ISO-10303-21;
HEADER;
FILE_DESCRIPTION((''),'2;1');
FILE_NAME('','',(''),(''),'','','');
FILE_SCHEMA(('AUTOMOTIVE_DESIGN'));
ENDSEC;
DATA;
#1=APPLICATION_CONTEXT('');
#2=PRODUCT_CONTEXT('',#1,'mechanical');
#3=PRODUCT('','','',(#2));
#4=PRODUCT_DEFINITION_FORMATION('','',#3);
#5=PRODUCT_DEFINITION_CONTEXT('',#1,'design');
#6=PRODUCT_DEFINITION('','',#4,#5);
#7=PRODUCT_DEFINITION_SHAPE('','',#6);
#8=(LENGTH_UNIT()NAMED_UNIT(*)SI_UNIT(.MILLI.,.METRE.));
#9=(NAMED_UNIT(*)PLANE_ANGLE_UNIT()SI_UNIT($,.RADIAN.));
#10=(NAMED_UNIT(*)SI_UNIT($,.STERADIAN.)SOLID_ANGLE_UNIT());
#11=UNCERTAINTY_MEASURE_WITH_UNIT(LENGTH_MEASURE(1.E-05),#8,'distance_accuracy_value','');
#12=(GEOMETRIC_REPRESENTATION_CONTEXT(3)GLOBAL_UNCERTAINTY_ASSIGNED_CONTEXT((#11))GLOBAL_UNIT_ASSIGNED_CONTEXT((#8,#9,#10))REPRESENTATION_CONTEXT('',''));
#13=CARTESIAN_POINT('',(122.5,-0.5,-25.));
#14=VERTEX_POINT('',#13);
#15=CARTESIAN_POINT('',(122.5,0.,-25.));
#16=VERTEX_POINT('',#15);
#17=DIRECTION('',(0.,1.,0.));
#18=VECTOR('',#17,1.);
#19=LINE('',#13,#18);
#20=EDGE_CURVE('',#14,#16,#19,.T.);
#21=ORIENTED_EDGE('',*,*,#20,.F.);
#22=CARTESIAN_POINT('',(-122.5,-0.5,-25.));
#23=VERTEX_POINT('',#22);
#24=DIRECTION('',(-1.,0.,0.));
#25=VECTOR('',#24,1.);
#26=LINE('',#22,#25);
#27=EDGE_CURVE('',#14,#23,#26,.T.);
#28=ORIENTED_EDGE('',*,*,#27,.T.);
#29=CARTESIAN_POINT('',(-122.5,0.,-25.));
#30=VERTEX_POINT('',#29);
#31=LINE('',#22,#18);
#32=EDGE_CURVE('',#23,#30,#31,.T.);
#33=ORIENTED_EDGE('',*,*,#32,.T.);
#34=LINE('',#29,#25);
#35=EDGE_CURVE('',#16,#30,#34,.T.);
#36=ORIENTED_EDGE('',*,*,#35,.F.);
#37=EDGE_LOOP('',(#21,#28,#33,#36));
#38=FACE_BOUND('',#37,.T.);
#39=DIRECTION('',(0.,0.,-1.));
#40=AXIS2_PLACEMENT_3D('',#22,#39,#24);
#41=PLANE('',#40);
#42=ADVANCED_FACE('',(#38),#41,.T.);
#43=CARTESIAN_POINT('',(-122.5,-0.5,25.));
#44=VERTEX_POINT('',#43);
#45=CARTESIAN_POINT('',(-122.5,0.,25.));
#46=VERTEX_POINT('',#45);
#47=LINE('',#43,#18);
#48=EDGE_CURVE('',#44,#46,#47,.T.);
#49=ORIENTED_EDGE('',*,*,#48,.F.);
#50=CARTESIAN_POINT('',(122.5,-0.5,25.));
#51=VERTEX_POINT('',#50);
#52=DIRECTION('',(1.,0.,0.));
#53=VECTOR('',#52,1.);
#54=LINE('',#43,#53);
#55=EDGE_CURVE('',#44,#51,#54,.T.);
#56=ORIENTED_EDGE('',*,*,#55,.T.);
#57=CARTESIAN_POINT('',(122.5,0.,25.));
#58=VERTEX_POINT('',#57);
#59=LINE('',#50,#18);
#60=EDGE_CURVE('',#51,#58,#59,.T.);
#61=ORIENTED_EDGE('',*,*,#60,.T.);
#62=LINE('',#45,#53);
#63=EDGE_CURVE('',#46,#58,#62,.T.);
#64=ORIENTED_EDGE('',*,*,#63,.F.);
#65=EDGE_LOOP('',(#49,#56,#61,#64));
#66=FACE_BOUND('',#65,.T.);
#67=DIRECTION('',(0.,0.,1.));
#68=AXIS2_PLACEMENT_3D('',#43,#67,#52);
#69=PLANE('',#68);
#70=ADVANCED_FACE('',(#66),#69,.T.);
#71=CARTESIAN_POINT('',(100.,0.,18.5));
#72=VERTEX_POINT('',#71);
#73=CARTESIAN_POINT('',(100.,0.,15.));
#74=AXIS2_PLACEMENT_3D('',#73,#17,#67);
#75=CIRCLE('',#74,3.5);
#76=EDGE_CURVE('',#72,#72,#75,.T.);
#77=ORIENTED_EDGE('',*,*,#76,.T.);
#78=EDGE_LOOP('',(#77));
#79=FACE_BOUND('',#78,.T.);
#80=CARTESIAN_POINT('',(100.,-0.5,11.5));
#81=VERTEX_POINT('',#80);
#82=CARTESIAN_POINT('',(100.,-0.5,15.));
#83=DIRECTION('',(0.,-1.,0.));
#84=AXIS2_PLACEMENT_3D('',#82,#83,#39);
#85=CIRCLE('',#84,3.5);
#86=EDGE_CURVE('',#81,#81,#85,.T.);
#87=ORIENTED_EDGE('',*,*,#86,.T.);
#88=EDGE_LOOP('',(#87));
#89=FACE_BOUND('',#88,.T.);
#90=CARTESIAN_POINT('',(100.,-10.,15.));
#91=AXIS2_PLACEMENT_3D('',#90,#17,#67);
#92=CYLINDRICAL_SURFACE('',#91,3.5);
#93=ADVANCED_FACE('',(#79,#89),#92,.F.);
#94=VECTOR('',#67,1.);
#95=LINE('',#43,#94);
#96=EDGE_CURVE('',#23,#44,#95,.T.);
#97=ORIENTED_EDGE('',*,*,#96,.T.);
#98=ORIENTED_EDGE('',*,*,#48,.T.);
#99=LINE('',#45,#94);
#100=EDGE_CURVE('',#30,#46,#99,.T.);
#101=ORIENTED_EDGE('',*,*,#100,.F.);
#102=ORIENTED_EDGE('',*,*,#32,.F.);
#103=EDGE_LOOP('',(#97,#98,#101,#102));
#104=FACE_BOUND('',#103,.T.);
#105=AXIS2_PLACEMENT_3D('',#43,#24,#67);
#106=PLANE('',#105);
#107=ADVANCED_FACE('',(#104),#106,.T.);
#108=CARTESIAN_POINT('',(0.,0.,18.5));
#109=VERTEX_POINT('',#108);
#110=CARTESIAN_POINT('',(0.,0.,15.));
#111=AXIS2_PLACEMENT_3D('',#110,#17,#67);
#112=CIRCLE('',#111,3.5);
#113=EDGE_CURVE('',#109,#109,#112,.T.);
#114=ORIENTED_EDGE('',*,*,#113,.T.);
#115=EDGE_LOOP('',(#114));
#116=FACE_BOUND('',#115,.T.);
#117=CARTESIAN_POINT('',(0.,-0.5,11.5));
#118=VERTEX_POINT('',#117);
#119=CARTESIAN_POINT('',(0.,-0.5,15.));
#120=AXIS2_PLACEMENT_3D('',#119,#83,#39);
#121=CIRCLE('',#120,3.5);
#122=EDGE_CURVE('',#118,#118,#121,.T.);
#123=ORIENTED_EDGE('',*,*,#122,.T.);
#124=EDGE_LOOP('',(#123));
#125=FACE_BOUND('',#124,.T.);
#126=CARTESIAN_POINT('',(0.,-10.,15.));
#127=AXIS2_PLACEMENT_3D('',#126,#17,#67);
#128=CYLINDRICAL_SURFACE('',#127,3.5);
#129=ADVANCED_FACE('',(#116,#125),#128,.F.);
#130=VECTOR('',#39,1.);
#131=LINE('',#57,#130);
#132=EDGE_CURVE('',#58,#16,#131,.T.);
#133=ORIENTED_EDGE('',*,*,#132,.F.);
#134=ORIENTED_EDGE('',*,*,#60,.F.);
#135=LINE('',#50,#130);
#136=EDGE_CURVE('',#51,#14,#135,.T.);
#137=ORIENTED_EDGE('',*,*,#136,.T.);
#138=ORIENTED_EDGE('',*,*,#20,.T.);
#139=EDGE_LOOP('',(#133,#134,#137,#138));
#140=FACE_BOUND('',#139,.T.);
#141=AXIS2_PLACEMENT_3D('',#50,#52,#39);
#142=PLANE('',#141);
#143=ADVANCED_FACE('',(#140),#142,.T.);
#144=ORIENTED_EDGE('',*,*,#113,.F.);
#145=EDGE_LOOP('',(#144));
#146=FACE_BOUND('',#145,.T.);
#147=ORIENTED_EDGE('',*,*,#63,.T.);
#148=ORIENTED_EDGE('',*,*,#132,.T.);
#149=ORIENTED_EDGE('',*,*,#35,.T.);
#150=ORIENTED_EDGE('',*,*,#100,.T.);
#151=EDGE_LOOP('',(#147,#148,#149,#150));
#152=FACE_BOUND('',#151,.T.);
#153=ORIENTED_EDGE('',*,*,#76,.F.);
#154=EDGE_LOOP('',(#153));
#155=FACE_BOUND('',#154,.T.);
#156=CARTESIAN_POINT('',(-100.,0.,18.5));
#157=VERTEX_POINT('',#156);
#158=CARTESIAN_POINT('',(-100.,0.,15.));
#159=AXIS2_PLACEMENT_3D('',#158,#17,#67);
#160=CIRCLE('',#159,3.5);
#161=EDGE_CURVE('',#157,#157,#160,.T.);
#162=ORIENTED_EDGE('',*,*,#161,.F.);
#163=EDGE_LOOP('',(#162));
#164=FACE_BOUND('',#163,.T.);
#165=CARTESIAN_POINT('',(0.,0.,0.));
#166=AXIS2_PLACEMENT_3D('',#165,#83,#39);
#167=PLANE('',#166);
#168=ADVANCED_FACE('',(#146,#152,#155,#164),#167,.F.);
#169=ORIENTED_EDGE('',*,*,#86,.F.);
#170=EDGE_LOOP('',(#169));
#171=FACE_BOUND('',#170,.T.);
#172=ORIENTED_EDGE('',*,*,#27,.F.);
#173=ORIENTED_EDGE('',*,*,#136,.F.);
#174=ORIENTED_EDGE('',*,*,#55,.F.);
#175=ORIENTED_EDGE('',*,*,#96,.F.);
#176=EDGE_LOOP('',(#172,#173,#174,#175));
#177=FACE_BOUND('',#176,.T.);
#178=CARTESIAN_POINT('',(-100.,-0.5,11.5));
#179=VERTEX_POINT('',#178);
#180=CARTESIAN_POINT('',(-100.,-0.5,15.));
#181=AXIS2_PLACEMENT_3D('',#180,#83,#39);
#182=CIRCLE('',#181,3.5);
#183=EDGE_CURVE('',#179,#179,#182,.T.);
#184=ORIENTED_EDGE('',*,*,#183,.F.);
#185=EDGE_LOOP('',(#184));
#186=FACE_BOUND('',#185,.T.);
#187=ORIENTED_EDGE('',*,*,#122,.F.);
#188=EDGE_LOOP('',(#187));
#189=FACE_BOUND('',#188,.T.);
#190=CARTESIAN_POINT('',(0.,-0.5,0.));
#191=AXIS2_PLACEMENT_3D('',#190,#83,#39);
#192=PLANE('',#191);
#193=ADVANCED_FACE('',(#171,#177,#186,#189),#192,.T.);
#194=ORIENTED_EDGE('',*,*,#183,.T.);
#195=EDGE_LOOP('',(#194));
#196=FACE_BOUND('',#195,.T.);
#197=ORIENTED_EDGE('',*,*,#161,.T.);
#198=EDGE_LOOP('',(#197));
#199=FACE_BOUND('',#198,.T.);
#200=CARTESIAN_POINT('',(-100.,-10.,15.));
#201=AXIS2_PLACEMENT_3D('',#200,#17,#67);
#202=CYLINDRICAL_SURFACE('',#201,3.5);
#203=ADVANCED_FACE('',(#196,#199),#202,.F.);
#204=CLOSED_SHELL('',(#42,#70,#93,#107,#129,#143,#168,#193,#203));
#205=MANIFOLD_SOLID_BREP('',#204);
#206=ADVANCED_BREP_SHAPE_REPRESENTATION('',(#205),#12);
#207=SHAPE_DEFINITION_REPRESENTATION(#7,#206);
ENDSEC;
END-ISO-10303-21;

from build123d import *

# Parameters (mm, degrees)
SKETCH1_W            = 245
SKETCH1_H            = 50
BASE_FLANGE1_DEPTH   = 0.5
SKETCH6_R            = 3.5
CUT_EXTRUDE1_DEPTH   = 10
LPATTERN1_COUNT      = 6
LPATTERN1_PITCH      = 146
LPATTERN1_COUNT_DIR2 = 6
LPATTERN1_PITCH_DIR2 = 146
LPATTERN2_COUNT      = 2
LPATTERN2_PITCH      = 100
LPATTERN2_COL_COUNT  = 2
LPATTERN2_COL_PITCH  = 100


# Sheet-metal steps are written as plain solids
with BuildPart() as part:
    # Sketch1 → Base-Flange1 (new body)
    with BuildSketch(Plane(origin=(0, 0, 0), x_dir=(1, 0, 0), z_dir=(0, 1, 0))):
        Rectangle(SKETCH1_W, SKETCH1_H)
    extrude(amount=-BASE_FLANGE1_DEPTH)

    # Sketch6 → Cut-Extrude1 (cut)
    with BuildSketch(Plane(origin=(0, 0, 0), x_dir=(1, 0, 0), z_dir=(0, 1, 0))):
        with Locations(Location((0, -15, 0), (0, 0, 270))):
            Circle(SKETCH6_R)
    cut_extrude1 = extrude(amount=-CUT_EXTRUDE1_DEPTH, mode=Mode.SUBTRACT)

    # LPattern1: Cut-Extrude1 6 × 6
    with Locations(*[Vector(-1, 0, 0) * (i * LPATTERN1_PITCH) + Vector(1, 0, 0) * (j * LPATTERN1_PITCH_DIR2) for i in range(LPATTERN1_COUNT) for j in range(LPATTERN1_COUNT_DIR2) if (i, j) != (0, 0)]):
        add(cut_extrude1, mode=Mode.SUBTRACT)

    # LPattern2: Cut-Extrude1 ×2
    with Locations(*[(-i * LPATTERN2_PITCH, 0, 0) for i in range(1, LPATTERN2_COUNT)]):
        add(cut_extrude1, mode=Mode.SUBTRACT)

    # LPattern2 col: Cut-Extrude1 ×2
    with Locations(*[(i * LPATTERN2_COL_PITCH, 0, 0) for i in range(1, LPATTERN2_COL_COUNT)]):
        add(cut_extrude1, mode=Mode.SUBTRACT)


solid = part.part
